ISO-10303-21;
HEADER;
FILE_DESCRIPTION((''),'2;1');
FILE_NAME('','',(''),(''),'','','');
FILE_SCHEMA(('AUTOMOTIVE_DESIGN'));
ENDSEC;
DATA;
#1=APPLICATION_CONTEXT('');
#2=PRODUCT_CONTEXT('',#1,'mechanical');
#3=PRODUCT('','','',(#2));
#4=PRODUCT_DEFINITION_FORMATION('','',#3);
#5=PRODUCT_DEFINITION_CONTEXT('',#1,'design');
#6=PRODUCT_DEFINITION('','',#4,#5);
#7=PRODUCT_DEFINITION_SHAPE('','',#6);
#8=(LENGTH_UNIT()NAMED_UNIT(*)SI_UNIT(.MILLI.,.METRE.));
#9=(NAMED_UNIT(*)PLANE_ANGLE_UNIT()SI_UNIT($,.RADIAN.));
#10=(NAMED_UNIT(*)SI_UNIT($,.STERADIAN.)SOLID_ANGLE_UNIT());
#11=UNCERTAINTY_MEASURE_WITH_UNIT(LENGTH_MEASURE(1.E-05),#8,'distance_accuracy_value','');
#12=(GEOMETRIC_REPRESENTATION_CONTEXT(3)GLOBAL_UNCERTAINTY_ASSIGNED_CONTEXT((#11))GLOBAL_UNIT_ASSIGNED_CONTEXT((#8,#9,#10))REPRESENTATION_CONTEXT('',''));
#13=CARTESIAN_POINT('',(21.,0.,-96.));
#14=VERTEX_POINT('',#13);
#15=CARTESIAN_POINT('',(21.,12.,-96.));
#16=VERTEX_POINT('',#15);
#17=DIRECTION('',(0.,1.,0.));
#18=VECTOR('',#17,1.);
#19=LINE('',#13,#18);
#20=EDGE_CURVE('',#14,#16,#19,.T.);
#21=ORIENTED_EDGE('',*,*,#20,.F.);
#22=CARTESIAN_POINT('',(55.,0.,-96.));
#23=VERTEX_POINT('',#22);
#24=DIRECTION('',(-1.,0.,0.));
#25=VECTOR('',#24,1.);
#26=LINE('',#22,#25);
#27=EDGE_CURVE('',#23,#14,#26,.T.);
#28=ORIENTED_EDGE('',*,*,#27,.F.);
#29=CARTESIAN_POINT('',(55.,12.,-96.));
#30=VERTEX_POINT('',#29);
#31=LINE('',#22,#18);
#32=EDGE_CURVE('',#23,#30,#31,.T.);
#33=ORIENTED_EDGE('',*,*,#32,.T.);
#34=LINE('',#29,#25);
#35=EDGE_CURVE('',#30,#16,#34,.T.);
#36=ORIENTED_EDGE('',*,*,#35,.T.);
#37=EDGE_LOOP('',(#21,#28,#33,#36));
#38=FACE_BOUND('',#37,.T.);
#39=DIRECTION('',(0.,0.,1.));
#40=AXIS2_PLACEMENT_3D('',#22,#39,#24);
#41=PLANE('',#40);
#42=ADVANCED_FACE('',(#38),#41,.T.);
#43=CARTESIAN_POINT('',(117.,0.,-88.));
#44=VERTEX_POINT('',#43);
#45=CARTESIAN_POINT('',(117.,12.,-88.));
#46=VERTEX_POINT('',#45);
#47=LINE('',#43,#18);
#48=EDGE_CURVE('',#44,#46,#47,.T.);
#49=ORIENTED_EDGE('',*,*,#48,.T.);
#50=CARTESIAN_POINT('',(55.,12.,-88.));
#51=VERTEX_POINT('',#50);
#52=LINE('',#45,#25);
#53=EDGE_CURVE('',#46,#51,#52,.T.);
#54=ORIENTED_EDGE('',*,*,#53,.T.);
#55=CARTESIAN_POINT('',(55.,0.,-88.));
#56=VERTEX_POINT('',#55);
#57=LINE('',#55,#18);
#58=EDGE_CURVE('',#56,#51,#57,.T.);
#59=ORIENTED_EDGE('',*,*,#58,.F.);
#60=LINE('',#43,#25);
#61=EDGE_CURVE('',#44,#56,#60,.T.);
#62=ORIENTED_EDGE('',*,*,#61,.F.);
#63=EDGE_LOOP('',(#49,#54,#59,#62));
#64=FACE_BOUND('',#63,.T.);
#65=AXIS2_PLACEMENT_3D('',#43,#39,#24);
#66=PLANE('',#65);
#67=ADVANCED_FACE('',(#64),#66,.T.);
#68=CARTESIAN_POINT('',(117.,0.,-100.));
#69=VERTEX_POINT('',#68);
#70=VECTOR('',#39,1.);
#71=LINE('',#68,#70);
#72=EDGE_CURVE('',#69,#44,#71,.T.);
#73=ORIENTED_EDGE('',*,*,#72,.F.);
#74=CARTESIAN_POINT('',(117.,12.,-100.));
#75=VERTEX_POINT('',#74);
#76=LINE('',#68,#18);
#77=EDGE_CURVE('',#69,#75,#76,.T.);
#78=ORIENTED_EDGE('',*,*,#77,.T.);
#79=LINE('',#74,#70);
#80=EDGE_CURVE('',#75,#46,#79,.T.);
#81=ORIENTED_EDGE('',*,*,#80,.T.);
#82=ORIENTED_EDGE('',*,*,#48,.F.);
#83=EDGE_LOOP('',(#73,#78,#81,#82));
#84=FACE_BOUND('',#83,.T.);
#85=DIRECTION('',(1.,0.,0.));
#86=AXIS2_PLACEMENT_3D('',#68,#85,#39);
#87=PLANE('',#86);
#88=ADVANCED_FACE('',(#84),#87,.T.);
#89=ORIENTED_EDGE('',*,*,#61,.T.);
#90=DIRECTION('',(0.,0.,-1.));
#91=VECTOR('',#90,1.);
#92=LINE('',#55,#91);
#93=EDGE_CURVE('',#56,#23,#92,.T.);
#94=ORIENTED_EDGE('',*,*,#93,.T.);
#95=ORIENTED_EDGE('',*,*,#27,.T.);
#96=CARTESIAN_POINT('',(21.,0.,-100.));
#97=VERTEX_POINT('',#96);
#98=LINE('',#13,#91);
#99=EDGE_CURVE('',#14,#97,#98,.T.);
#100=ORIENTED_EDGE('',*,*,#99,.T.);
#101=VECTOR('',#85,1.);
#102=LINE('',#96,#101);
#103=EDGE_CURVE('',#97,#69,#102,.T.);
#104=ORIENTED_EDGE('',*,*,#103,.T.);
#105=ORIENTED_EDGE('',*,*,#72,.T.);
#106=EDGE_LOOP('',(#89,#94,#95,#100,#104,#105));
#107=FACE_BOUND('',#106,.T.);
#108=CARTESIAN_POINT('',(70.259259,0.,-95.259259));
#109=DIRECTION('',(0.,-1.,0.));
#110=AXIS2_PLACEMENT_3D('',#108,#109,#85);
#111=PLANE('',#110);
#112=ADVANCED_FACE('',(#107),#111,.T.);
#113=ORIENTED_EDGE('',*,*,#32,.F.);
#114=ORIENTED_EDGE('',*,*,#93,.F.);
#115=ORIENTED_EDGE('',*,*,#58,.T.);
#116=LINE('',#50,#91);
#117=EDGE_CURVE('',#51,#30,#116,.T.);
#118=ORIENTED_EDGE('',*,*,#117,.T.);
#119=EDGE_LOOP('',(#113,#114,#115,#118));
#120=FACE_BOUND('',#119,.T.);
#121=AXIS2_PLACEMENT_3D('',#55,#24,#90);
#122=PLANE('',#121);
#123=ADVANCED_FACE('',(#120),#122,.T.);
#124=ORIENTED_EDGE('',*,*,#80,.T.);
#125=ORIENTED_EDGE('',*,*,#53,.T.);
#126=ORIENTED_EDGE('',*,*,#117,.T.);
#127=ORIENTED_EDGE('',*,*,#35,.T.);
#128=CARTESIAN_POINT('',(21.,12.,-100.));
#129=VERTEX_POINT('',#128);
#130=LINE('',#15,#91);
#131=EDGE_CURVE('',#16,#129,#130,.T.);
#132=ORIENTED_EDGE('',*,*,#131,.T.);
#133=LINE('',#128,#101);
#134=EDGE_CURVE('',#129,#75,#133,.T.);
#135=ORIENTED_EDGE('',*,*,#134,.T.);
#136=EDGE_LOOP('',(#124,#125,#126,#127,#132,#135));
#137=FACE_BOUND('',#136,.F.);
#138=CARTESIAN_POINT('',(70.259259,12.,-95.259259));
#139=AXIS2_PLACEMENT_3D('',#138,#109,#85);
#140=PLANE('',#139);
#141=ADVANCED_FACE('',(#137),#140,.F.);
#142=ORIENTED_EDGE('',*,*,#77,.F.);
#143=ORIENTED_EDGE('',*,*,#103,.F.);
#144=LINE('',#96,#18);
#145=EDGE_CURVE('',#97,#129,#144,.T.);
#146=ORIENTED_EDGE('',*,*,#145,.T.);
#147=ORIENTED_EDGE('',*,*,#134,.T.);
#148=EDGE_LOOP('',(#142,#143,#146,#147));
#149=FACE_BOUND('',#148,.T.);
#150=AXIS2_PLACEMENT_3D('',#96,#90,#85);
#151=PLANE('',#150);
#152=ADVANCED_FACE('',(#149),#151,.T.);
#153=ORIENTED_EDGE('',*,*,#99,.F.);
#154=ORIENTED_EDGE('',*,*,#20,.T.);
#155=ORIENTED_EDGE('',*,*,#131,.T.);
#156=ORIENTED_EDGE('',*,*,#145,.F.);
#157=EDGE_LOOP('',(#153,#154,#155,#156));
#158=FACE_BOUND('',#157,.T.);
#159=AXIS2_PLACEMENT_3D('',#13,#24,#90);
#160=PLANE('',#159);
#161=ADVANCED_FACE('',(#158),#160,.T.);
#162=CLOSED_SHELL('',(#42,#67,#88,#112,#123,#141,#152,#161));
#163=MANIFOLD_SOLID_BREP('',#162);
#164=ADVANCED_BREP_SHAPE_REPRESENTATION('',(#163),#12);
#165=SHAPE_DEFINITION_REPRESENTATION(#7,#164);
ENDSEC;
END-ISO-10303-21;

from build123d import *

# Parameters (mm, degrees)
F1_DEPTH = 12


# Not quite as in the source:
# - a feature names something its author has since deleted; it is built from what else it names


with BuildPart() as f1:
    # F0 (on Front) → F1 (new body)
    with BuildSketch(Plane.XZ):
        Polygon((55, -96), (21, -96), (21, -100), (117, -100), (117, -88), (55, -88), align=None)
    extrude(amount=-F1_DEPTH)


solid = f1.part
